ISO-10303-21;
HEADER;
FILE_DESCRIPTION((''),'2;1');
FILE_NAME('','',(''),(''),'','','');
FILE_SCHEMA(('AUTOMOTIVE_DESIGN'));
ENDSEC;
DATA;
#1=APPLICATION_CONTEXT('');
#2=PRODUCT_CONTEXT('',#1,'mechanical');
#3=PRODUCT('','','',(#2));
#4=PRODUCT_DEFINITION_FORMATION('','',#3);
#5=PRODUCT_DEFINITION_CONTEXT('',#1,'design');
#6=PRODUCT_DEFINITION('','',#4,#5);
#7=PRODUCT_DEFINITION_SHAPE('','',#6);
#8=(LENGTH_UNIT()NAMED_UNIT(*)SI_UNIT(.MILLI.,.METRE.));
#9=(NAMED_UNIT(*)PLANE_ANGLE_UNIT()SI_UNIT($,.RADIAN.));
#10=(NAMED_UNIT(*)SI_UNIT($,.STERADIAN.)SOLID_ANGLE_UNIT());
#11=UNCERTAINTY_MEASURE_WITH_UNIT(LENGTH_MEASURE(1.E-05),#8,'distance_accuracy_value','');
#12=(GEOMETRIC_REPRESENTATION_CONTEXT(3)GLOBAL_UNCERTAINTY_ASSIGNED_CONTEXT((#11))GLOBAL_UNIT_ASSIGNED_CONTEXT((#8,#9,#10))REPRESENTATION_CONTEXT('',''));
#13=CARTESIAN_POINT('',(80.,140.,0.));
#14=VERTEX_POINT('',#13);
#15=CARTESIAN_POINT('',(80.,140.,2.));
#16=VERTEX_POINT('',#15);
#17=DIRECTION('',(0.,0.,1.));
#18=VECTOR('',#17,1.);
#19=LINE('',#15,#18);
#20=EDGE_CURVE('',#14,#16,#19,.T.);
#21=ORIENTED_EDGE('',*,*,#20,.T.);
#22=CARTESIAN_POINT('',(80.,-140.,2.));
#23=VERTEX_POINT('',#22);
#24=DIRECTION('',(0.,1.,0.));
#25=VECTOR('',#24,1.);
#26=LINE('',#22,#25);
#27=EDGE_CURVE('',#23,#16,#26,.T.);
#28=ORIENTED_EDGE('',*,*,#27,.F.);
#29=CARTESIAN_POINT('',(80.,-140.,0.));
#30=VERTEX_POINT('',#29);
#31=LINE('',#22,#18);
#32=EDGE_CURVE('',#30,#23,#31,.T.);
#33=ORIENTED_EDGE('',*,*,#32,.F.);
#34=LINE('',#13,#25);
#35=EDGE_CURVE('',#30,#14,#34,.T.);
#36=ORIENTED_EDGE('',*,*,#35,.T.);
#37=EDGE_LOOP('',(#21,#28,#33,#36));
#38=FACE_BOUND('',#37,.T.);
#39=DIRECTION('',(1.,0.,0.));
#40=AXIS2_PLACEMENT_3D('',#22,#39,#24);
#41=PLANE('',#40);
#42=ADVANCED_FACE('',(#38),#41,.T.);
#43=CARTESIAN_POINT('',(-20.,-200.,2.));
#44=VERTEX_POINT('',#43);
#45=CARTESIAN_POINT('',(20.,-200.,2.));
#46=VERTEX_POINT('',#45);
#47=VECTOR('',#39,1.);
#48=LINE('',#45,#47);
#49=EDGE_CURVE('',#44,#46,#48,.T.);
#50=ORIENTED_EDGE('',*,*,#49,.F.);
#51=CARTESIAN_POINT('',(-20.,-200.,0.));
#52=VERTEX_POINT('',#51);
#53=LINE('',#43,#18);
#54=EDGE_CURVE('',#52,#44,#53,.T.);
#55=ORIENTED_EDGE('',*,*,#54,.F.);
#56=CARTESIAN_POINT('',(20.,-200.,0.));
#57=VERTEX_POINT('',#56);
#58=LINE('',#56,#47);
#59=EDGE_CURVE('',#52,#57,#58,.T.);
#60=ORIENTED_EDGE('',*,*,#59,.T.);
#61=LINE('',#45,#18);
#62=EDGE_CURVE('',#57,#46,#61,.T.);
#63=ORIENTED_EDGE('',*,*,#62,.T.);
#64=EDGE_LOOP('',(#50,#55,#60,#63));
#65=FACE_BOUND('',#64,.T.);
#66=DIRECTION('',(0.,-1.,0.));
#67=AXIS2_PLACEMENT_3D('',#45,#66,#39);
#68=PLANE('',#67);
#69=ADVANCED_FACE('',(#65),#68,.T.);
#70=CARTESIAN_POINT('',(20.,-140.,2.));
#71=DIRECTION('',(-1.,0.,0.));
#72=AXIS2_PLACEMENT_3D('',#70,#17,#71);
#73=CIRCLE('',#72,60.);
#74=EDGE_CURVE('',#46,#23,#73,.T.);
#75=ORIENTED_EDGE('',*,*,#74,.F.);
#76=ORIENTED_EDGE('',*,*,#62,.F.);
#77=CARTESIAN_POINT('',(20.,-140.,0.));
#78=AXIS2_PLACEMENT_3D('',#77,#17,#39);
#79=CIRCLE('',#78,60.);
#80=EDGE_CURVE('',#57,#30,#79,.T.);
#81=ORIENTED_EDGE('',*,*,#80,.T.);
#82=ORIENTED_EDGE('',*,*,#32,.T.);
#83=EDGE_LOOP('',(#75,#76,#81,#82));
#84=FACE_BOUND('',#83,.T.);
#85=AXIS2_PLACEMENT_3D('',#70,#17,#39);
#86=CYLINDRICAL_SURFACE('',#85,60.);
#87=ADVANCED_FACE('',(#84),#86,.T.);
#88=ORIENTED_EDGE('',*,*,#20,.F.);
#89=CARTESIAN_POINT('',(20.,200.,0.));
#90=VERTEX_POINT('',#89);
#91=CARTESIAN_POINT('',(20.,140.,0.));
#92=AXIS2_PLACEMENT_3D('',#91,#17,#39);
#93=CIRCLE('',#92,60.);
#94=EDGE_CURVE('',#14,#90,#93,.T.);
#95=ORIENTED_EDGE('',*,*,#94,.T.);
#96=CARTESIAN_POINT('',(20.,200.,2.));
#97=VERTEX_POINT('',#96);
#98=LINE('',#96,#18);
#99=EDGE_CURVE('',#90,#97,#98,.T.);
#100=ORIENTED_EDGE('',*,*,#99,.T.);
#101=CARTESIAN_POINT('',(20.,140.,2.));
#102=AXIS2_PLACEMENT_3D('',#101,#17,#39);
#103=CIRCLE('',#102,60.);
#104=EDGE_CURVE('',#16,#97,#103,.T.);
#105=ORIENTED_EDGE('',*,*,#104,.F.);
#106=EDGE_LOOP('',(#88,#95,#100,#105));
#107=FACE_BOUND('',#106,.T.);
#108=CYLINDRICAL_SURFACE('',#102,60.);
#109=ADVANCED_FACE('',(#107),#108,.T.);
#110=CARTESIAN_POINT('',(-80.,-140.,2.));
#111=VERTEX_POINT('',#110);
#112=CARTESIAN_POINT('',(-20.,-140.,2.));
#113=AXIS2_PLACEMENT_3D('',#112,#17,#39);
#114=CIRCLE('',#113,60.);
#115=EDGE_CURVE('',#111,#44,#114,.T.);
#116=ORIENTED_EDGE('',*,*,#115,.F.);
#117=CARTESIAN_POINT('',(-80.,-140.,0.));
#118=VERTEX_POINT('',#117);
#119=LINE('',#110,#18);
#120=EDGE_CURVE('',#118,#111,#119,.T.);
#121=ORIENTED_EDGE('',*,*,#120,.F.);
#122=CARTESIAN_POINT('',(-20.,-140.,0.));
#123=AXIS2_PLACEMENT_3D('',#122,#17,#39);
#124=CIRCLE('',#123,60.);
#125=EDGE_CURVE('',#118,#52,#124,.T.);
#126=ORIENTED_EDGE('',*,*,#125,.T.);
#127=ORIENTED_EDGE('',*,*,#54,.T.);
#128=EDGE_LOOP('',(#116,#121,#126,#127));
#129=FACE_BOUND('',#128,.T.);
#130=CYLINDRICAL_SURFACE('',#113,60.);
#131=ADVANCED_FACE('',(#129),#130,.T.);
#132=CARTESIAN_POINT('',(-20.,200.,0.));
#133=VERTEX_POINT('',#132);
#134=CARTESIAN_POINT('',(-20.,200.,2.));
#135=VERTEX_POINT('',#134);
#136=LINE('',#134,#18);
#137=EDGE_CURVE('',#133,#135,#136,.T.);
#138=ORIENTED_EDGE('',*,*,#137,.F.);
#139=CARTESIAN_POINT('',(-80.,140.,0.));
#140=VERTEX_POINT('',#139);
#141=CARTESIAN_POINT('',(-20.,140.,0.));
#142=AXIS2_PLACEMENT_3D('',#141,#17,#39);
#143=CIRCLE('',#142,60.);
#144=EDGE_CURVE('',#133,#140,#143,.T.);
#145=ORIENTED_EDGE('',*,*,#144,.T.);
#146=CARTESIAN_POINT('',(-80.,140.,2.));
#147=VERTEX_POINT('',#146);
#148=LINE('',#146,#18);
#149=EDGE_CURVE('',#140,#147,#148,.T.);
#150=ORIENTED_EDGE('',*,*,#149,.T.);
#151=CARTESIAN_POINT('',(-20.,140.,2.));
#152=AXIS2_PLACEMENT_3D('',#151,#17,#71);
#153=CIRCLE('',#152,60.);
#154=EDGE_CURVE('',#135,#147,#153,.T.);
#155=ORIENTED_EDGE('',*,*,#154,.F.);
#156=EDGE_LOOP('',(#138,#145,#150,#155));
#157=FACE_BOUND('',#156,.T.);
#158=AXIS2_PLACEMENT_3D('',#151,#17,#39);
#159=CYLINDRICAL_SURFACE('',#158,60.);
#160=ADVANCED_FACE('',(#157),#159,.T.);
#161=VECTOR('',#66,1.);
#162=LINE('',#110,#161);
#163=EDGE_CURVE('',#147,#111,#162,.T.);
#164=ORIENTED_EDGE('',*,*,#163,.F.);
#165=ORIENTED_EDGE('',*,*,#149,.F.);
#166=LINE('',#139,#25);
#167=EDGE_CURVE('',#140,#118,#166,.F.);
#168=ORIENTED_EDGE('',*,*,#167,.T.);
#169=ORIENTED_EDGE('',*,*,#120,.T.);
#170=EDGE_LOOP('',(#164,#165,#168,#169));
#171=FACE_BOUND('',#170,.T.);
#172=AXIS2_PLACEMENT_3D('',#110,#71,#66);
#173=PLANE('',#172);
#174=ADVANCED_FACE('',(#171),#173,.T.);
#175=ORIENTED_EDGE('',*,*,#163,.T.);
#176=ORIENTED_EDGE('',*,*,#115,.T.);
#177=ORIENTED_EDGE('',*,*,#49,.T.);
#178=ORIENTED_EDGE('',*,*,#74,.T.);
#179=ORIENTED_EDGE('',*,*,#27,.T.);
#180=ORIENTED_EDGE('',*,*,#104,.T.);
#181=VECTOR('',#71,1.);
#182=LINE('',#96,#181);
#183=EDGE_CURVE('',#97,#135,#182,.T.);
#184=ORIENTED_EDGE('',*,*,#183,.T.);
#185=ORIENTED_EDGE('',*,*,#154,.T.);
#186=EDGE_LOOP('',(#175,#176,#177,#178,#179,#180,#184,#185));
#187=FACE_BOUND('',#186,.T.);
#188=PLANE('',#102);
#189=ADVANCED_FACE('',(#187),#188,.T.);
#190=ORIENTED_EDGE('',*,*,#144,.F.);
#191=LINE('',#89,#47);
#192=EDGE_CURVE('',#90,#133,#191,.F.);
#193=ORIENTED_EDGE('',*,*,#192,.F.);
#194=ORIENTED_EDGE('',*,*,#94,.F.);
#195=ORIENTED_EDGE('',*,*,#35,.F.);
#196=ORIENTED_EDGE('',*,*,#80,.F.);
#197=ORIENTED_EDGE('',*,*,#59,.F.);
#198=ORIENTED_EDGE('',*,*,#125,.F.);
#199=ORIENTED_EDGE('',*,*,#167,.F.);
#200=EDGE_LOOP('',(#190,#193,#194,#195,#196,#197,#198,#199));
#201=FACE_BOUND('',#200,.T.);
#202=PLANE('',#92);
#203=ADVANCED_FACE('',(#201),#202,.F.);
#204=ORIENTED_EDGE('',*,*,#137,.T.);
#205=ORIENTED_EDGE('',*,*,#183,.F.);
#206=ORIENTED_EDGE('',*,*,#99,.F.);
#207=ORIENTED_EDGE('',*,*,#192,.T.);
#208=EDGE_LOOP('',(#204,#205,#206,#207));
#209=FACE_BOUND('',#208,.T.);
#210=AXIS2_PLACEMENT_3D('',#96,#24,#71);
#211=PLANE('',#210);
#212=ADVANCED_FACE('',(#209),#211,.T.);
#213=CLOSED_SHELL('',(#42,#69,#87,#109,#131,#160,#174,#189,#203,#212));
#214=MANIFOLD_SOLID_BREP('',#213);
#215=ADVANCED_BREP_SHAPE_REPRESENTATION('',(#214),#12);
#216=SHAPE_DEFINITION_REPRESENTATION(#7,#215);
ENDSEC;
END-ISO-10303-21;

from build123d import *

# Parameters (mm, degrees)
EXTRUDE_1_DEPTH = 2


with BuildPart() as part:
    # Эскиз1 → Бобышка-Вытянуть1 (new body)
    with BuildSketch(Plane.XY):
        with BuildLine():
            Line((80, -140), (80, 140))
            ThreePointArc((80, 140), (62.426406871, 182.426406871), (20, 200))
            Line((20, 200), (-20, 200))
            ThreePointArc((-20, 200), (-62.426406871, 182.426406871), (-80, 140))
            Line((-80, 140), (-80, -140))
            ThreePointArc((-80, -140), (-62.426406871, -182.426406871), (-20, -200))
            Line((-20, -200), (20, -200))
            ThreePointArc((20, -200), (62.426406871, -182.426406871), (80, -140))
        make_face()
    extrude(amount=EXTRUDE_1_DEPTH)


solid = part.part
